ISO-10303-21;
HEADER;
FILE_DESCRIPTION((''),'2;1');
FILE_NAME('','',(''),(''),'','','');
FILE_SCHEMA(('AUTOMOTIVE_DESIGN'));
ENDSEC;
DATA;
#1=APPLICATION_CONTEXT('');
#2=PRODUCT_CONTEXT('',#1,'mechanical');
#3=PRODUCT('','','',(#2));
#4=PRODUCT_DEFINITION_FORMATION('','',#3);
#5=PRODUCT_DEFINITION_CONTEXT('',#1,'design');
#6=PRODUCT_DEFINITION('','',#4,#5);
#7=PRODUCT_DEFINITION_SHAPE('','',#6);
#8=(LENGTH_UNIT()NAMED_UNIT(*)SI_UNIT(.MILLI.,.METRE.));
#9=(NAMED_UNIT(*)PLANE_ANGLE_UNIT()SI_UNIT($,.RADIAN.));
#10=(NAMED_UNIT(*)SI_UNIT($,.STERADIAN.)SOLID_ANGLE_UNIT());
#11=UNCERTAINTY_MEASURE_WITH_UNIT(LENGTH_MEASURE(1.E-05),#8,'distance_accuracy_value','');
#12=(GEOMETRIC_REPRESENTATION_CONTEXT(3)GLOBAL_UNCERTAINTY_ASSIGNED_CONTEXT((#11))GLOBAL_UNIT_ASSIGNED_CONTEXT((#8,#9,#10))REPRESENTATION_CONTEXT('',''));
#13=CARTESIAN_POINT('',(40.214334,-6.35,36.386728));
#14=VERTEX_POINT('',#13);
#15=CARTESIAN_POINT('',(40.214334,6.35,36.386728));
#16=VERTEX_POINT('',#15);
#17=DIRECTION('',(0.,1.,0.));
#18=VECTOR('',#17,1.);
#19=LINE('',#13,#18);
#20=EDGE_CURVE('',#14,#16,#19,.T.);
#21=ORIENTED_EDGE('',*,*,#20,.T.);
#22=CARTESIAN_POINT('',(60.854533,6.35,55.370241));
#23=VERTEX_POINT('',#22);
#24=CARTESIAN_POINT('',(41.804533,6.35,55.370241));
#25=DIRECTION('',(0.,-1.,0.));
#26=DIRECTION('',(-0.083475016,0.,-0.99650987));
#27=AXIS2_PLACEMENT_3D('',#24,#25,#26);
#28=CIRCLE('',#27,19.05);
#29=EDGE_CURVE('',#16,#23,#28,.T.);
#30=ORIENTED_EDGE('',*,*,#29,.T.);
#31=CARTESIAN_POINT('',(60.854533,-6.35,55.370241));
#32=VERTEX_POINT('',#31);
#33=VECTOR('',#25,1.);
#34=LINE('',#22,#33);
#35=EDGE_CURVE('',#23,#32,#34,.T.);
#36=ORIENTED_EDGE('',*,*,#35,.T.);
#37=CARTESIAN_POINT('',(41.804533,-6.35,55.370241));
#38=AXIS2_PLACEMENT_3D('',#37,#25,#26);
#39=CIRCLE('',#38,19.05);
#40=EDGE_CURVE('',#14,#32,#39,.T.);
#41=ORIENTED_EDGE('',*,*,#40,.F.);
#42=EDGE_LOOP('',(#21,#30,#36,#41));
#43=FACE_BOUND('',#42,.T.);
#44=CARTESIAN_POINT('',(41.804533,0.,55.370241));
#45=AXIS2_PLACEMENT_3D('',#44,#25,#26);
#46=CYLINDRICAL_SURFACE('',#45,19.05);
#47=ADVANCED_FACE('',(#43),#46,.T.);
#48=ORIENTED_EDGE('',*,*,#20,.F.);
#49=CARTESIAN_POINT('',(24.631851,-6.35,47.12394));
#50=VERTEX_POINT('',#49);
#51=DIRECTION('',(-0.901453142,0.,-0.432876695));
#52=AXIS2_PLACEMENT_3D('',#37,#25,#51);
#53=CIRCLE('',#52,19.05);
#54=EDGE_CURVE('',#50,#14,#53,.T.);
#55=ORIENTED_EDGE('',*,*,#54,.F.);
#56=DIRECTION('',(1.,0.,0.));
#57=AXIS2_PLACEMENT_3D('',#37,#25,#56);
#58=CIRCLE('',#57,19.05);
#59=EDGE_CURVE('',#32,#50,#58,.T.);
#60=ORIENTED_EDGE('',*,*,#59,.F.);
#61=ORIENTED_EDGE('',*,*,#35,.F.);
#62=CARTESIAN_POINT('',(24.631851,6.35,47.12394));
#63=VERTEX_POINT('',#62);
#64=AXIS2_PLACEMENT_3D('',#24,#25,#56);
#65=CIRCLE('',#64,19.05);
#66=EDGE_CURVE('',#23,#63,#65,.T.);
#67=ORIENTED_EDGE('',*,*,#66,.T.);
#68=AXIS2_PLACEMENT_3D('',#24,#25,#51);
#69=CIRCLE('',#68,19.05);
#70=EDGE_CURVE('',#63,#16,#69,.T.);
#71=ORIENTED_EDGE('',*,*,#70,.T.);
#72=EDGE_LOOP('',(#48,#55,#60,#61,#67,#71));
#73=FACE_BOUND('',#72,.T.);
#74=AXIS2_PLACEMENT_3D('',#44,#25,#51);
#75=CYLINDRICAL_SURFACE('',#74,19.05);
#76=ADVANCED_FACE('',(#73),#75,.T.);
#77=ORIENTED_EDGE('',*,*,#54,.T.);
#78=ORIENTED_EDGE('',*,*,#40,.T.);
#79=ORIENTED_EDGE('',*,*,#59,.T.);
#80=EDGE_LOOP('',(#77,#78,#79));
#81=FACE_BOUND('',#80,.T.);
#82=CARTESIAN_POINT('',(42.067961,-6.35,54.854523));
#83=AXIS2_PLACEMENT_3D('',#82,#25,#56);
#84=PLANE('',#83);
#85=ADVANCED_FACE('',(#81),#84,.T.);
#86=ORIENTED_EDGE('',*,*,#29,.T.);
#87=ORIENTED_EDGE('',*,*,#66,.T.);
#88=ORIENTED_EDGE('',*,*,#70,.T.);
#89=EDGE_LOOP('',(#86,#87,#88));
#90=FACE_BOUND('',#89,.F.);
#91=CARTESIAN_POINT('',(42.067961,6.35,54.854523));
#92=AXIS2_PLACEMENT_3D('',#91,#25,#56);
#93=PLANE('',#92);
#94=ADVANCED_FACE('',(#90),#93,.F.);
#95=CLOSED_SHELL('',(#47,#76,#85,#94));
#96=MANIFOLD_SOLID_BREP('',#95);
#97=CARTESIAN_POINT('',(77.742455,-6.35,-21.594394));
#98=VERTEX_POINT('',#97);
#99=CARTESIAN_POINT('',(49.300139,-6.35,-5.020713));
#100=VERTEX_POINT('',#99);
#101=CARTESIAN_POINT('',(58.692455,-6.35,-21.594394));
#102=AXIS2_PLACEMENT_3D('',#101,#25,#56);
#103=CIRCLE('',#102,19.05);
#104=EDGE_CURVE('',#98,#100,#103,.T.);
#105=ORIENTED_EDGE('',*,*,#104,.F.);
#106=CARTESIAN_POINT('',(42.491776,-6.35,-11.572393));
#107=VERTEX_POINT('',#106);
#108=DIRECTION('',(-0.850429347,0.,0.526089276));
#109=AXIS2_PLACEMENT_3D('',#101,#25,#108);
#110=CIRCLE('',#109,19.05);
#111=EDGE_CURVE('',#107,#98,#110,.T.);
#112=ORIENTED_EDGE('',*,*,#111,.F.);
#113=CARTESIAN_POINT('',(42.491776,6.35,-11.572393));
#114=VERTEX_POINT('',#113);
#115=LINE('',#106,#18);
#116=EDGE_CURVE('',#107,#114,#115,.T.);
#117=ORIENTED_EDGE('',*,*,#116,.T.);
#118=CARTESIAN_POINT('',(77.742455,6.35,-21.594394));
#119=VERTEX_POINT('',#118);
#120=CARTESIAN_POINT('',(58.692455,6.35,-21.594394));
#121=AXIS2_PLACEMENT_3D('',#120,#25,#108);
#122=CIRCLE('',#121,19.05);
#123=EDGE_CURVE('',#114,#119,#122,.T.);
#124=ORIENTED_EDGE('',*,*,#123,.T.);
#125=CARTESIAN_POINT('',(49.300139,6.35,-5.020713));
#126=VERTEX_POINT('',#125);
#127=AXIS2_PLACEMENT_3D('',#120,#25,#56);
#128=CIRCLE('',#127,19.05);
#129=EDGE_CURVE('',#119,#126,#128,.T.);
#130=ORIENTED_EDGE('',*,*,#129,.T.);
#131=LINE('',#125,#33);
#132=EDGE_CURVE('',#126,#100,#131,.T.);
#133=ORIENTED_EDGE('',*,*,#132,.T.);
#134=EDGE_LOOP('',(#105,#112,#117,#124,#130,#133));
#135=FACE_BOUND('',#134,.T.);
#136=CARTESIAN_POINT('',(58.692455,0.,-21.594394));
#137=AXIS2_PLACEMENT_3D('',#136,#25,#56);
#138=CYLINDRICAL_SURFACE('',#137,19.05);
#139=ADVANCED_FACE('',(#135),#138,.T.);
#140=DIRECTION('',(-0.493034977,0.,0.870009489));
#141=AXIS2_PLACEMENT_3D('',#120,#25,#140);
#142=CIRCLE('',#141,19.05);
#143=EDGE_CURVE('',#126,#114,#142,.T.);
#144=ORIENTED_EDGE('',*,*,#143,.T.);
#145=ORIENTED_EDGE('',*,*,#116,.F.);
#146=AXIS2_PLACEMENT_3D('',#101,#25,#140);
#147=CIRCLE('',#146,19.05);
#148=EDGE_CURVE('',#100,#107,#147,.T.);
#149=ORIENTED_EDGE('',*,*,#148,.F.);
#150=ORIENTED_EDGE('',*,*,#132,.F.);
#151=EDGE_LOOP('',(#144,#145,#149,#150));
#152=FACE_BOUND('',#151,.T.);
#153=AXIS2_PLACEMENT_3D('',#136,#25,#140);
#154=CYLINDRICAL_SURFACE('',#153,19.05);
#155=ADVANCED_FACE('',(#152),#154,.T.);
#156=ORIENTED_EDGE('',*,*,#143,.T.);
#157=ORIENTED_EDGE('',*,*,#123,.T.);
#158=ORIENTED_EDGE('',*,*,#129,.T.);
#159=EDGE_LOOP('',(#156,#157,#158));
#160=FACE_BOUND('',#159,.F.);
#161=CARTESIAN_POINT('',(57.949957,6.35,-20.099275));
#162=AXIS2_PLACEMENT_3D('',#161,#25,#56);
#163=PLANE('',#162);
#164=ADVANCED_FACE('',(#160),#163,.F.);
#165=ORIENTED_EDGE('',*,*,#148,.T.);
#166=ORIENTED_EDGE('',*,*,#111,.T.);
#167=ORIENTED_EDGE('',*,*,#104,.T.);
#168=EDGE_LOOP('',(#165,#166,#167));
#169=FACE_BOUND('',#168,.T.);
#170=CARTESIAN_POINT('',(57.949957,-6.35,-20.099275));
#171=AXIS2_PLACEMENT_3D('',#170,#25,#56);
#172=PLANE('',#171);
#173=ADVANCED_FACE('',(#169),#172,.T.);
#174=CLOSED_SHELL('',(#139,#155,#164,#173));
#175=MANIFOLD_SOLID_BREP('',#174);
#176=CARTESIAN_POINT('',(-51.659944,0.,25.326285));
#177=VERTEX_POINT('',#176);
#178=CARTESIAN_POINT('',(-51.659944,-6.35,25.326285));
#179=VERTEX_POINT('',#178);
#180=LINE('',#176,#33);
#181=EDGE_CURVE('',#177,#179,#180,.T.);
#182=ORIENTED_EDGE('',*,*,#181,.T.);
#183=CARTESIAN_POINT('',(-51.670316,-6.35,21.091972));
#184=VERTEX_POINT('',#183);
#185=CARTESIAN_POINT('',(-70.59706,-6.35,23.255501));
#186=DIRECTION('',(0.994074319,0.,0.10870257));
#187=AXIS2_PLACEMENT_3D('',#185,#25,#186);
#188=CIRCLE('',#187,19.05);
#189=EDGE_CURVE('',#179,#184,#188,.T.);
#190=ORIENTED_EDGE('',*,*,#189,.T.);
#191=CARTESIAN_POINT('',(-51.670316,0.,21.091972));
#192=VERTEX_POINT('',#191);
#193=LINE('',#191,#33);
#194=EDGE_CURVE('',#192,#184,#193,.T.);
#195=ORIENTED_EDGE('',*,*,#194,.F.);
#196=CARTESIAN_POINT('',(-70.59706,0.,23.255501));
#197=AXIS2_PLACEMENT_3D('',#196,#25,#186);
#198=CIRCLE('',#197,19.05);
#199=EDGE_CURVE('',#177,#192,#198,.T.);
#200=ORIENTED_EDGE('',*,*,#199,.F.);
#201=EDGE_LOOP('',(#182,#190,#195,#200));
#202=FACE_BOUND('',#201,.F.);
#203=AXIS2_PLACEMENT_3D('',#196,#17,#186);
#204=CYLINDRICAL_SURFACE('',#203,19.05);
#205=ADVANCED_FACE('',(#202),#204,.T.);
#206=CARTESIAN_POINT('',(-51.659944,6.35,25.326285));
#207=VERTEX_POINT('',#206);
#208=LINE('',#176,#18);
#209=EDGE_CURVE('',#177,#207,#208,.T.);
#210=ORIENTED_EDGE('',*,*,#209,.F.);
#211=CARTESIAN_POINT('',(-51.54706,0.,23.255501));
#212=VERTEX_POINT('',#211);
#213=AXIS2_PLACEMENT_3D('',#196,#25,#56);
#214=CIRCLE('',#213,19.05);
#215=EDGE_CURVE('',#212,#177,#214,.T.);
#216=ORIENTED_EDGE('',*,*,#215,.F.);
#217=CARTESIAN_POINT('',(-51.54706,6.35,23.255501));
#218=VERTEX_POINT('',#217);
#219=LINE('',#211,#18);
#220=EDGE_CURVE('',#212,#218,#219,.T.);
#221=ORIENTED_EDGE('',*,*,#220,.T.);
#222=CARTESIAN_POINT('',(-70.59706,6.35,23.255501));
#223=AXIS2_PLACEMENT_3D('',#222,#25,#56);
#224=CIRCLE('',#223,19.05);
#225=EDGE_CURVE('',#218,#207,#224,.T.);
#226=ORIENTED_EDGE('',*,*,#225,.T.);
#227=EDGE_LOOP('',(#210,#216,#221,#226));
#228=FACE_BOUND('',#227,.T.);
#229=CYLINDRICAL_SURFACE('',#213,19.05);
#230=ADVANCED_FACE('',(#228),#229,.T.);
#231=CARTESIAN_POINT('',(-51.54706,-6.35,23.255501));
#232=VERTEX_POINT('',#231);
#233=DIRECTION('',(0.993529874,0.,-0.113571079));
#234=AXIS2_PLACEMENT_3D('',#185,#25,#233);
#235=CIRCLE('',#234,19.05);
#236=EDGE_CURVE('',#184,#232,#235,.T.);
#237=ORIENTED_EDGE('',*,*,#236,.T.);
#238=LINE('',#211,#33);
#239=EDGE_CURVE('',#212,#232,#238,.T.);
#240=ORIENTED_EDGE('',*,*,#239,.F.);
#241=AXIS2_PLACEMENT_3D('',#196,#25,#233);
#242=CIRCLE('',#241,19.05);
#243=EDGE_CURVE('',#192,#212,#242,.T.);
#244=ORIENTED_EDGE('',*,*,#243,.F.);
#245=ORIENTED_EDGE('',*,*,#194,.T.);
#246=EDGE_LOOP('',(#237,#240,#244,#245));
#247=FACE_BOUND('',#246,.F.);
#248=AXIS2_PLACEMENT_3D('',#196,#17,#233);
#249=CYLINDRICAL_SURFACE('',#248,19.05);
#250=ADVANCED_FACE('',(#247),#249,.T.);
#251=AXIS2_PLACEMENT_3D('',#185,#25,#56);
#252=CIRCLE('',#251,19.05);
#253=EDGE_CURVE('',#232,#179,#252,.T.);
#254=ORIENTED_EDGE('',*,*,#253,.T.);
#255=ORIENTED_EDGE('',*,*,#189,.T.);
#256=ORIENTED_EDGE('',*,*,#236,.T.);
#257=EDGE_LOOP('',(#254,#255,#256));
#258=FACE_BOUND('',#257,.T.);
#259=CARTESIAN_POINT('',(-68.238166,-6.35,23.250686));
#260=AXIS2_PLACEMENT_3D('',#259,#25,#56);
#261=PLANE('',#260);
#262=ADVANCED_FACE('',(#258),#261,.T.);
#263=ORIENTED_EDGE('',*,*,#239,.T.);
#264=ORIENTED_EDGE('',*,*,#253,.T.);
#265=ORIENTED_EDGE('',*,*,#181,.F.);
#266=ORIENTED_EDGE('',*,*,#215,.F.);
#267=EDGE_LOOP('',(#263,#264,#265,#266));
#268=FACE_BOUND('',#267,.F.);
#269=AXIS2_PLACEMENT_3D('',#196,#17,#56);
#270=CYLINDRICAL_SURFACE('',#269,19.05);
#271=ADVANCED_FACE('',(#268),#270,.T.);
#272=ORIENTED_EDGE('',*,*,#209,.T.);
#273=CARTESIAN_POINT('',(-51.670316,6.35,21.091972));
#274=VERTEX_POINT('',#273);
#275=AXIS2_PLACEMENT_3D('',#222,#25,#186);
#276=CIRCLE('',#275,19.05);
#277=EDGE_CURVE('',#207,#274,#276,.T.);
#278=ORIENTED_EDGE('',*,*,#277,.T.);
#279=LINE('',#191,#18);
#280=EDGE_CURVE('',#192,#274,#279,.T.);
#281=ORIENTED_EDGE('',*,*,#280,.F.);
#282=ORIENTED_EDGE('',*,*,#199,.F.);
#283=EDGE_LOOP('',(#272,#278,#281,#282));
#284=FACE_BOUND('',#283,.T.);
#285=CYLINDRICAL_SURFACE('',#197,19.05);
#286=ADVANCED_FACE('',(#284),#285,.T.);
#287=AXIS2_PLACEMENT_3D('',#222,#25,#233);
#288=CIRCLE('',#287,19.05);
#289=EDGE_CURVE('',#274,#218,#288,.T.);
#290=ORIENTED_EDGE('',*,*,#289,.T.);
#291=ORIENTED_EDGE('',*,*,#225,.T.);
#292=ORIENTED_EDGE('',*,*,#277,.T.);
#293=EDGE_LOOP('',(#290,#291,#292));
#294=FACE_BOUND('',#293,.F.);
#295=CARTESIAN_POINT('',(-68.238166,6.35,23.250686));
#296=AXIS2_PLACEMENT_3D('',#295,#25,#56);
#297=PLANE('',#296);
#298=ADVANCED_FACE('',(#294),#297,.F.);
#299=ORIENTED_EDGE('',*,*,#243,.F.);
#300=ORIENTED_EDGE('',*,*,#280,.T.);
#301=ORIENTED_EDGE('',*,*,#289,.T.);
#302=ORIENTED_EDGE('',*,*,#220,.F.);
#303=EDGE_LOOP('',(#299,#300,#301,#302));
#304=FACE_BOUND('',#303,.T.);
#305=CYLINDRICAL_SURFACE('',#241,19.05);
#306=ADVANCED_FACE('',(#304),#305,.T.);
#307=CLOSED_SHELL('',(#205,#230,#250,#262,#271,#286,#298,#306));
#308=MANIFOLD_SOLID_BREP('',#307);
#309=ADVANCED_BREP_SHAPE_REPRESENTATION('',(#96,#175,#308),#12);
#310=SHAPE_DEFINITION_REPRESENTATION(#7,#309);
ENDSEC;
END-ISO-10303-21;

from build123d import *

# Parameters (mm, degrees)
F1_DEPTH = 6.35


with BuildPart() as f1:
    # F0 (on Front) → F1 (new body, symmetric)
    with BuildSketch(Plane.XZ):
        with BuildLine():
            ThreePointArc((40.2143343991, 36.3867283732), (54.7004476894, 41.3489042357), (60.8545334518, 55.3702414036))
            ThreePointArc((60.8545334518, 55.3702414036), (37.5758870258, 73.9449836469), (24.6318510997, 47.1239403641))
            ThreePointArc((24.6318510997, 47.1239403641), (33.2856450146, 51.1066225147), (41.8045334518, 55.3702414036))
            ThreePointArc((41.8045334518, 55.3702414036), (40.5700567026, 45.915290365), (40.2143343991, 36.3867283732))
        make_face()
        with BuildLine():
            ThreePointArc((41.8045334518, 55.3702414036), (33.2856450146, 51.1066225147), (24.6318510997, 47.1239403641))
            ThreePointArc((24.6318510997, 47.1239403641), (30.9955853075, 39.683650314), (40.2143343991, 36.3867283732))
            ThreePointArc((40.2143343991, 36.3867283732), (40.5700567026, 45.915290365), (41.8045334518, 55.3702414036))
        make_face()
    extrude(amount=F1_DEPTH, both=True)


with BuildPart() as f1b:
    # F0 (on Front) → F1, piece 2 (new body, symmetric)
    with BuildSketch(Plane.XZ):
        with BuildLine():
            ThreePointArc((77.7424552917, -21.5943939984), (68.2835676975, -5.1349571058), (49.3001389851, -5.0207132245))
            ThreePointArc((49.3001389851, -5.0207132245), (53.6126959673, -13.5249406592), (58.6924552917, -21.5943939984))
            ThreePointArc((58.6924552917, -21.5943939984), (50.6802033726, -16.4409990163), (42.4917762362, -11.572393293))
            ThreePointArc((42.4917762362, -11.572393293), (53.482869704, -39.918223238), (77.7424552917, -21.5943939984))
        make_face()
        with BuildLine():
            ThreePointArc((58.6924552917, -21.5943939984), (53.6126959673, -13.5249406592), (49.3001389851, -5.0207132245))
            ThreePointArc((49.3001389851, -5.0207132245), (45.4833114575, -7.8677403943), (42.4917762362, -11.572393293))
            ThreePointArc((42.4917762362, -11.572393293), (50.6802033726, -16.4409990163), (58.6924552917, -21.5943939984))
        make_face()
    extrude(amount=F1_DEPTH, both=True)


with BuildPart() as f1c:
    # F0 (on Front) → F1, piece 3 (new body, symmetric)
    with BuildSketch(Plane.XZ):
        with BuildLine():
            ThreePointArc((-70.5970600247, 23.2555009425), (-61.1115636291, 24.1359919206), (-51.6599442528, 25.3262849104))
            ThreePointArc((-51.6599442528, 25.3262849104), (-89.6470028775, 23.3021625557), (-51.670315931, 21.0919718782))
            ThreePointArc((-51.670315931, 21.0919718782), (-61.1146718047, 22.3400915799), (-70.5970600247, 23.2555009425))
        make_face()
        with BuildLine():
            ThreePointArc((-51.5470600247, 23.2555009425), (-51.5753020164, 24.292430194), (-51.6599442528, 25.3262849104))
            ThreePointArc((-51.6599442528, 25.3262849104), (-61.1115636291, 24.1359919206), (-70.5970600247, 23.2555009425))
            ThreePointArc((-70.5970600247, 23.2555009425), (-61.1146718047, 22.3400915799), (-51.670315931, 21.0919718782))
            ThreePointArc((-51.670315931, 21.0919718782), (-51.577898963, 22.1719823651), (-51.5470600247, 23.2555009425))
        make_face()
    extrude(amount=F1_DEPTH, both=True)


solid = Compound([f1.part, f1b.part, f1c.part])
